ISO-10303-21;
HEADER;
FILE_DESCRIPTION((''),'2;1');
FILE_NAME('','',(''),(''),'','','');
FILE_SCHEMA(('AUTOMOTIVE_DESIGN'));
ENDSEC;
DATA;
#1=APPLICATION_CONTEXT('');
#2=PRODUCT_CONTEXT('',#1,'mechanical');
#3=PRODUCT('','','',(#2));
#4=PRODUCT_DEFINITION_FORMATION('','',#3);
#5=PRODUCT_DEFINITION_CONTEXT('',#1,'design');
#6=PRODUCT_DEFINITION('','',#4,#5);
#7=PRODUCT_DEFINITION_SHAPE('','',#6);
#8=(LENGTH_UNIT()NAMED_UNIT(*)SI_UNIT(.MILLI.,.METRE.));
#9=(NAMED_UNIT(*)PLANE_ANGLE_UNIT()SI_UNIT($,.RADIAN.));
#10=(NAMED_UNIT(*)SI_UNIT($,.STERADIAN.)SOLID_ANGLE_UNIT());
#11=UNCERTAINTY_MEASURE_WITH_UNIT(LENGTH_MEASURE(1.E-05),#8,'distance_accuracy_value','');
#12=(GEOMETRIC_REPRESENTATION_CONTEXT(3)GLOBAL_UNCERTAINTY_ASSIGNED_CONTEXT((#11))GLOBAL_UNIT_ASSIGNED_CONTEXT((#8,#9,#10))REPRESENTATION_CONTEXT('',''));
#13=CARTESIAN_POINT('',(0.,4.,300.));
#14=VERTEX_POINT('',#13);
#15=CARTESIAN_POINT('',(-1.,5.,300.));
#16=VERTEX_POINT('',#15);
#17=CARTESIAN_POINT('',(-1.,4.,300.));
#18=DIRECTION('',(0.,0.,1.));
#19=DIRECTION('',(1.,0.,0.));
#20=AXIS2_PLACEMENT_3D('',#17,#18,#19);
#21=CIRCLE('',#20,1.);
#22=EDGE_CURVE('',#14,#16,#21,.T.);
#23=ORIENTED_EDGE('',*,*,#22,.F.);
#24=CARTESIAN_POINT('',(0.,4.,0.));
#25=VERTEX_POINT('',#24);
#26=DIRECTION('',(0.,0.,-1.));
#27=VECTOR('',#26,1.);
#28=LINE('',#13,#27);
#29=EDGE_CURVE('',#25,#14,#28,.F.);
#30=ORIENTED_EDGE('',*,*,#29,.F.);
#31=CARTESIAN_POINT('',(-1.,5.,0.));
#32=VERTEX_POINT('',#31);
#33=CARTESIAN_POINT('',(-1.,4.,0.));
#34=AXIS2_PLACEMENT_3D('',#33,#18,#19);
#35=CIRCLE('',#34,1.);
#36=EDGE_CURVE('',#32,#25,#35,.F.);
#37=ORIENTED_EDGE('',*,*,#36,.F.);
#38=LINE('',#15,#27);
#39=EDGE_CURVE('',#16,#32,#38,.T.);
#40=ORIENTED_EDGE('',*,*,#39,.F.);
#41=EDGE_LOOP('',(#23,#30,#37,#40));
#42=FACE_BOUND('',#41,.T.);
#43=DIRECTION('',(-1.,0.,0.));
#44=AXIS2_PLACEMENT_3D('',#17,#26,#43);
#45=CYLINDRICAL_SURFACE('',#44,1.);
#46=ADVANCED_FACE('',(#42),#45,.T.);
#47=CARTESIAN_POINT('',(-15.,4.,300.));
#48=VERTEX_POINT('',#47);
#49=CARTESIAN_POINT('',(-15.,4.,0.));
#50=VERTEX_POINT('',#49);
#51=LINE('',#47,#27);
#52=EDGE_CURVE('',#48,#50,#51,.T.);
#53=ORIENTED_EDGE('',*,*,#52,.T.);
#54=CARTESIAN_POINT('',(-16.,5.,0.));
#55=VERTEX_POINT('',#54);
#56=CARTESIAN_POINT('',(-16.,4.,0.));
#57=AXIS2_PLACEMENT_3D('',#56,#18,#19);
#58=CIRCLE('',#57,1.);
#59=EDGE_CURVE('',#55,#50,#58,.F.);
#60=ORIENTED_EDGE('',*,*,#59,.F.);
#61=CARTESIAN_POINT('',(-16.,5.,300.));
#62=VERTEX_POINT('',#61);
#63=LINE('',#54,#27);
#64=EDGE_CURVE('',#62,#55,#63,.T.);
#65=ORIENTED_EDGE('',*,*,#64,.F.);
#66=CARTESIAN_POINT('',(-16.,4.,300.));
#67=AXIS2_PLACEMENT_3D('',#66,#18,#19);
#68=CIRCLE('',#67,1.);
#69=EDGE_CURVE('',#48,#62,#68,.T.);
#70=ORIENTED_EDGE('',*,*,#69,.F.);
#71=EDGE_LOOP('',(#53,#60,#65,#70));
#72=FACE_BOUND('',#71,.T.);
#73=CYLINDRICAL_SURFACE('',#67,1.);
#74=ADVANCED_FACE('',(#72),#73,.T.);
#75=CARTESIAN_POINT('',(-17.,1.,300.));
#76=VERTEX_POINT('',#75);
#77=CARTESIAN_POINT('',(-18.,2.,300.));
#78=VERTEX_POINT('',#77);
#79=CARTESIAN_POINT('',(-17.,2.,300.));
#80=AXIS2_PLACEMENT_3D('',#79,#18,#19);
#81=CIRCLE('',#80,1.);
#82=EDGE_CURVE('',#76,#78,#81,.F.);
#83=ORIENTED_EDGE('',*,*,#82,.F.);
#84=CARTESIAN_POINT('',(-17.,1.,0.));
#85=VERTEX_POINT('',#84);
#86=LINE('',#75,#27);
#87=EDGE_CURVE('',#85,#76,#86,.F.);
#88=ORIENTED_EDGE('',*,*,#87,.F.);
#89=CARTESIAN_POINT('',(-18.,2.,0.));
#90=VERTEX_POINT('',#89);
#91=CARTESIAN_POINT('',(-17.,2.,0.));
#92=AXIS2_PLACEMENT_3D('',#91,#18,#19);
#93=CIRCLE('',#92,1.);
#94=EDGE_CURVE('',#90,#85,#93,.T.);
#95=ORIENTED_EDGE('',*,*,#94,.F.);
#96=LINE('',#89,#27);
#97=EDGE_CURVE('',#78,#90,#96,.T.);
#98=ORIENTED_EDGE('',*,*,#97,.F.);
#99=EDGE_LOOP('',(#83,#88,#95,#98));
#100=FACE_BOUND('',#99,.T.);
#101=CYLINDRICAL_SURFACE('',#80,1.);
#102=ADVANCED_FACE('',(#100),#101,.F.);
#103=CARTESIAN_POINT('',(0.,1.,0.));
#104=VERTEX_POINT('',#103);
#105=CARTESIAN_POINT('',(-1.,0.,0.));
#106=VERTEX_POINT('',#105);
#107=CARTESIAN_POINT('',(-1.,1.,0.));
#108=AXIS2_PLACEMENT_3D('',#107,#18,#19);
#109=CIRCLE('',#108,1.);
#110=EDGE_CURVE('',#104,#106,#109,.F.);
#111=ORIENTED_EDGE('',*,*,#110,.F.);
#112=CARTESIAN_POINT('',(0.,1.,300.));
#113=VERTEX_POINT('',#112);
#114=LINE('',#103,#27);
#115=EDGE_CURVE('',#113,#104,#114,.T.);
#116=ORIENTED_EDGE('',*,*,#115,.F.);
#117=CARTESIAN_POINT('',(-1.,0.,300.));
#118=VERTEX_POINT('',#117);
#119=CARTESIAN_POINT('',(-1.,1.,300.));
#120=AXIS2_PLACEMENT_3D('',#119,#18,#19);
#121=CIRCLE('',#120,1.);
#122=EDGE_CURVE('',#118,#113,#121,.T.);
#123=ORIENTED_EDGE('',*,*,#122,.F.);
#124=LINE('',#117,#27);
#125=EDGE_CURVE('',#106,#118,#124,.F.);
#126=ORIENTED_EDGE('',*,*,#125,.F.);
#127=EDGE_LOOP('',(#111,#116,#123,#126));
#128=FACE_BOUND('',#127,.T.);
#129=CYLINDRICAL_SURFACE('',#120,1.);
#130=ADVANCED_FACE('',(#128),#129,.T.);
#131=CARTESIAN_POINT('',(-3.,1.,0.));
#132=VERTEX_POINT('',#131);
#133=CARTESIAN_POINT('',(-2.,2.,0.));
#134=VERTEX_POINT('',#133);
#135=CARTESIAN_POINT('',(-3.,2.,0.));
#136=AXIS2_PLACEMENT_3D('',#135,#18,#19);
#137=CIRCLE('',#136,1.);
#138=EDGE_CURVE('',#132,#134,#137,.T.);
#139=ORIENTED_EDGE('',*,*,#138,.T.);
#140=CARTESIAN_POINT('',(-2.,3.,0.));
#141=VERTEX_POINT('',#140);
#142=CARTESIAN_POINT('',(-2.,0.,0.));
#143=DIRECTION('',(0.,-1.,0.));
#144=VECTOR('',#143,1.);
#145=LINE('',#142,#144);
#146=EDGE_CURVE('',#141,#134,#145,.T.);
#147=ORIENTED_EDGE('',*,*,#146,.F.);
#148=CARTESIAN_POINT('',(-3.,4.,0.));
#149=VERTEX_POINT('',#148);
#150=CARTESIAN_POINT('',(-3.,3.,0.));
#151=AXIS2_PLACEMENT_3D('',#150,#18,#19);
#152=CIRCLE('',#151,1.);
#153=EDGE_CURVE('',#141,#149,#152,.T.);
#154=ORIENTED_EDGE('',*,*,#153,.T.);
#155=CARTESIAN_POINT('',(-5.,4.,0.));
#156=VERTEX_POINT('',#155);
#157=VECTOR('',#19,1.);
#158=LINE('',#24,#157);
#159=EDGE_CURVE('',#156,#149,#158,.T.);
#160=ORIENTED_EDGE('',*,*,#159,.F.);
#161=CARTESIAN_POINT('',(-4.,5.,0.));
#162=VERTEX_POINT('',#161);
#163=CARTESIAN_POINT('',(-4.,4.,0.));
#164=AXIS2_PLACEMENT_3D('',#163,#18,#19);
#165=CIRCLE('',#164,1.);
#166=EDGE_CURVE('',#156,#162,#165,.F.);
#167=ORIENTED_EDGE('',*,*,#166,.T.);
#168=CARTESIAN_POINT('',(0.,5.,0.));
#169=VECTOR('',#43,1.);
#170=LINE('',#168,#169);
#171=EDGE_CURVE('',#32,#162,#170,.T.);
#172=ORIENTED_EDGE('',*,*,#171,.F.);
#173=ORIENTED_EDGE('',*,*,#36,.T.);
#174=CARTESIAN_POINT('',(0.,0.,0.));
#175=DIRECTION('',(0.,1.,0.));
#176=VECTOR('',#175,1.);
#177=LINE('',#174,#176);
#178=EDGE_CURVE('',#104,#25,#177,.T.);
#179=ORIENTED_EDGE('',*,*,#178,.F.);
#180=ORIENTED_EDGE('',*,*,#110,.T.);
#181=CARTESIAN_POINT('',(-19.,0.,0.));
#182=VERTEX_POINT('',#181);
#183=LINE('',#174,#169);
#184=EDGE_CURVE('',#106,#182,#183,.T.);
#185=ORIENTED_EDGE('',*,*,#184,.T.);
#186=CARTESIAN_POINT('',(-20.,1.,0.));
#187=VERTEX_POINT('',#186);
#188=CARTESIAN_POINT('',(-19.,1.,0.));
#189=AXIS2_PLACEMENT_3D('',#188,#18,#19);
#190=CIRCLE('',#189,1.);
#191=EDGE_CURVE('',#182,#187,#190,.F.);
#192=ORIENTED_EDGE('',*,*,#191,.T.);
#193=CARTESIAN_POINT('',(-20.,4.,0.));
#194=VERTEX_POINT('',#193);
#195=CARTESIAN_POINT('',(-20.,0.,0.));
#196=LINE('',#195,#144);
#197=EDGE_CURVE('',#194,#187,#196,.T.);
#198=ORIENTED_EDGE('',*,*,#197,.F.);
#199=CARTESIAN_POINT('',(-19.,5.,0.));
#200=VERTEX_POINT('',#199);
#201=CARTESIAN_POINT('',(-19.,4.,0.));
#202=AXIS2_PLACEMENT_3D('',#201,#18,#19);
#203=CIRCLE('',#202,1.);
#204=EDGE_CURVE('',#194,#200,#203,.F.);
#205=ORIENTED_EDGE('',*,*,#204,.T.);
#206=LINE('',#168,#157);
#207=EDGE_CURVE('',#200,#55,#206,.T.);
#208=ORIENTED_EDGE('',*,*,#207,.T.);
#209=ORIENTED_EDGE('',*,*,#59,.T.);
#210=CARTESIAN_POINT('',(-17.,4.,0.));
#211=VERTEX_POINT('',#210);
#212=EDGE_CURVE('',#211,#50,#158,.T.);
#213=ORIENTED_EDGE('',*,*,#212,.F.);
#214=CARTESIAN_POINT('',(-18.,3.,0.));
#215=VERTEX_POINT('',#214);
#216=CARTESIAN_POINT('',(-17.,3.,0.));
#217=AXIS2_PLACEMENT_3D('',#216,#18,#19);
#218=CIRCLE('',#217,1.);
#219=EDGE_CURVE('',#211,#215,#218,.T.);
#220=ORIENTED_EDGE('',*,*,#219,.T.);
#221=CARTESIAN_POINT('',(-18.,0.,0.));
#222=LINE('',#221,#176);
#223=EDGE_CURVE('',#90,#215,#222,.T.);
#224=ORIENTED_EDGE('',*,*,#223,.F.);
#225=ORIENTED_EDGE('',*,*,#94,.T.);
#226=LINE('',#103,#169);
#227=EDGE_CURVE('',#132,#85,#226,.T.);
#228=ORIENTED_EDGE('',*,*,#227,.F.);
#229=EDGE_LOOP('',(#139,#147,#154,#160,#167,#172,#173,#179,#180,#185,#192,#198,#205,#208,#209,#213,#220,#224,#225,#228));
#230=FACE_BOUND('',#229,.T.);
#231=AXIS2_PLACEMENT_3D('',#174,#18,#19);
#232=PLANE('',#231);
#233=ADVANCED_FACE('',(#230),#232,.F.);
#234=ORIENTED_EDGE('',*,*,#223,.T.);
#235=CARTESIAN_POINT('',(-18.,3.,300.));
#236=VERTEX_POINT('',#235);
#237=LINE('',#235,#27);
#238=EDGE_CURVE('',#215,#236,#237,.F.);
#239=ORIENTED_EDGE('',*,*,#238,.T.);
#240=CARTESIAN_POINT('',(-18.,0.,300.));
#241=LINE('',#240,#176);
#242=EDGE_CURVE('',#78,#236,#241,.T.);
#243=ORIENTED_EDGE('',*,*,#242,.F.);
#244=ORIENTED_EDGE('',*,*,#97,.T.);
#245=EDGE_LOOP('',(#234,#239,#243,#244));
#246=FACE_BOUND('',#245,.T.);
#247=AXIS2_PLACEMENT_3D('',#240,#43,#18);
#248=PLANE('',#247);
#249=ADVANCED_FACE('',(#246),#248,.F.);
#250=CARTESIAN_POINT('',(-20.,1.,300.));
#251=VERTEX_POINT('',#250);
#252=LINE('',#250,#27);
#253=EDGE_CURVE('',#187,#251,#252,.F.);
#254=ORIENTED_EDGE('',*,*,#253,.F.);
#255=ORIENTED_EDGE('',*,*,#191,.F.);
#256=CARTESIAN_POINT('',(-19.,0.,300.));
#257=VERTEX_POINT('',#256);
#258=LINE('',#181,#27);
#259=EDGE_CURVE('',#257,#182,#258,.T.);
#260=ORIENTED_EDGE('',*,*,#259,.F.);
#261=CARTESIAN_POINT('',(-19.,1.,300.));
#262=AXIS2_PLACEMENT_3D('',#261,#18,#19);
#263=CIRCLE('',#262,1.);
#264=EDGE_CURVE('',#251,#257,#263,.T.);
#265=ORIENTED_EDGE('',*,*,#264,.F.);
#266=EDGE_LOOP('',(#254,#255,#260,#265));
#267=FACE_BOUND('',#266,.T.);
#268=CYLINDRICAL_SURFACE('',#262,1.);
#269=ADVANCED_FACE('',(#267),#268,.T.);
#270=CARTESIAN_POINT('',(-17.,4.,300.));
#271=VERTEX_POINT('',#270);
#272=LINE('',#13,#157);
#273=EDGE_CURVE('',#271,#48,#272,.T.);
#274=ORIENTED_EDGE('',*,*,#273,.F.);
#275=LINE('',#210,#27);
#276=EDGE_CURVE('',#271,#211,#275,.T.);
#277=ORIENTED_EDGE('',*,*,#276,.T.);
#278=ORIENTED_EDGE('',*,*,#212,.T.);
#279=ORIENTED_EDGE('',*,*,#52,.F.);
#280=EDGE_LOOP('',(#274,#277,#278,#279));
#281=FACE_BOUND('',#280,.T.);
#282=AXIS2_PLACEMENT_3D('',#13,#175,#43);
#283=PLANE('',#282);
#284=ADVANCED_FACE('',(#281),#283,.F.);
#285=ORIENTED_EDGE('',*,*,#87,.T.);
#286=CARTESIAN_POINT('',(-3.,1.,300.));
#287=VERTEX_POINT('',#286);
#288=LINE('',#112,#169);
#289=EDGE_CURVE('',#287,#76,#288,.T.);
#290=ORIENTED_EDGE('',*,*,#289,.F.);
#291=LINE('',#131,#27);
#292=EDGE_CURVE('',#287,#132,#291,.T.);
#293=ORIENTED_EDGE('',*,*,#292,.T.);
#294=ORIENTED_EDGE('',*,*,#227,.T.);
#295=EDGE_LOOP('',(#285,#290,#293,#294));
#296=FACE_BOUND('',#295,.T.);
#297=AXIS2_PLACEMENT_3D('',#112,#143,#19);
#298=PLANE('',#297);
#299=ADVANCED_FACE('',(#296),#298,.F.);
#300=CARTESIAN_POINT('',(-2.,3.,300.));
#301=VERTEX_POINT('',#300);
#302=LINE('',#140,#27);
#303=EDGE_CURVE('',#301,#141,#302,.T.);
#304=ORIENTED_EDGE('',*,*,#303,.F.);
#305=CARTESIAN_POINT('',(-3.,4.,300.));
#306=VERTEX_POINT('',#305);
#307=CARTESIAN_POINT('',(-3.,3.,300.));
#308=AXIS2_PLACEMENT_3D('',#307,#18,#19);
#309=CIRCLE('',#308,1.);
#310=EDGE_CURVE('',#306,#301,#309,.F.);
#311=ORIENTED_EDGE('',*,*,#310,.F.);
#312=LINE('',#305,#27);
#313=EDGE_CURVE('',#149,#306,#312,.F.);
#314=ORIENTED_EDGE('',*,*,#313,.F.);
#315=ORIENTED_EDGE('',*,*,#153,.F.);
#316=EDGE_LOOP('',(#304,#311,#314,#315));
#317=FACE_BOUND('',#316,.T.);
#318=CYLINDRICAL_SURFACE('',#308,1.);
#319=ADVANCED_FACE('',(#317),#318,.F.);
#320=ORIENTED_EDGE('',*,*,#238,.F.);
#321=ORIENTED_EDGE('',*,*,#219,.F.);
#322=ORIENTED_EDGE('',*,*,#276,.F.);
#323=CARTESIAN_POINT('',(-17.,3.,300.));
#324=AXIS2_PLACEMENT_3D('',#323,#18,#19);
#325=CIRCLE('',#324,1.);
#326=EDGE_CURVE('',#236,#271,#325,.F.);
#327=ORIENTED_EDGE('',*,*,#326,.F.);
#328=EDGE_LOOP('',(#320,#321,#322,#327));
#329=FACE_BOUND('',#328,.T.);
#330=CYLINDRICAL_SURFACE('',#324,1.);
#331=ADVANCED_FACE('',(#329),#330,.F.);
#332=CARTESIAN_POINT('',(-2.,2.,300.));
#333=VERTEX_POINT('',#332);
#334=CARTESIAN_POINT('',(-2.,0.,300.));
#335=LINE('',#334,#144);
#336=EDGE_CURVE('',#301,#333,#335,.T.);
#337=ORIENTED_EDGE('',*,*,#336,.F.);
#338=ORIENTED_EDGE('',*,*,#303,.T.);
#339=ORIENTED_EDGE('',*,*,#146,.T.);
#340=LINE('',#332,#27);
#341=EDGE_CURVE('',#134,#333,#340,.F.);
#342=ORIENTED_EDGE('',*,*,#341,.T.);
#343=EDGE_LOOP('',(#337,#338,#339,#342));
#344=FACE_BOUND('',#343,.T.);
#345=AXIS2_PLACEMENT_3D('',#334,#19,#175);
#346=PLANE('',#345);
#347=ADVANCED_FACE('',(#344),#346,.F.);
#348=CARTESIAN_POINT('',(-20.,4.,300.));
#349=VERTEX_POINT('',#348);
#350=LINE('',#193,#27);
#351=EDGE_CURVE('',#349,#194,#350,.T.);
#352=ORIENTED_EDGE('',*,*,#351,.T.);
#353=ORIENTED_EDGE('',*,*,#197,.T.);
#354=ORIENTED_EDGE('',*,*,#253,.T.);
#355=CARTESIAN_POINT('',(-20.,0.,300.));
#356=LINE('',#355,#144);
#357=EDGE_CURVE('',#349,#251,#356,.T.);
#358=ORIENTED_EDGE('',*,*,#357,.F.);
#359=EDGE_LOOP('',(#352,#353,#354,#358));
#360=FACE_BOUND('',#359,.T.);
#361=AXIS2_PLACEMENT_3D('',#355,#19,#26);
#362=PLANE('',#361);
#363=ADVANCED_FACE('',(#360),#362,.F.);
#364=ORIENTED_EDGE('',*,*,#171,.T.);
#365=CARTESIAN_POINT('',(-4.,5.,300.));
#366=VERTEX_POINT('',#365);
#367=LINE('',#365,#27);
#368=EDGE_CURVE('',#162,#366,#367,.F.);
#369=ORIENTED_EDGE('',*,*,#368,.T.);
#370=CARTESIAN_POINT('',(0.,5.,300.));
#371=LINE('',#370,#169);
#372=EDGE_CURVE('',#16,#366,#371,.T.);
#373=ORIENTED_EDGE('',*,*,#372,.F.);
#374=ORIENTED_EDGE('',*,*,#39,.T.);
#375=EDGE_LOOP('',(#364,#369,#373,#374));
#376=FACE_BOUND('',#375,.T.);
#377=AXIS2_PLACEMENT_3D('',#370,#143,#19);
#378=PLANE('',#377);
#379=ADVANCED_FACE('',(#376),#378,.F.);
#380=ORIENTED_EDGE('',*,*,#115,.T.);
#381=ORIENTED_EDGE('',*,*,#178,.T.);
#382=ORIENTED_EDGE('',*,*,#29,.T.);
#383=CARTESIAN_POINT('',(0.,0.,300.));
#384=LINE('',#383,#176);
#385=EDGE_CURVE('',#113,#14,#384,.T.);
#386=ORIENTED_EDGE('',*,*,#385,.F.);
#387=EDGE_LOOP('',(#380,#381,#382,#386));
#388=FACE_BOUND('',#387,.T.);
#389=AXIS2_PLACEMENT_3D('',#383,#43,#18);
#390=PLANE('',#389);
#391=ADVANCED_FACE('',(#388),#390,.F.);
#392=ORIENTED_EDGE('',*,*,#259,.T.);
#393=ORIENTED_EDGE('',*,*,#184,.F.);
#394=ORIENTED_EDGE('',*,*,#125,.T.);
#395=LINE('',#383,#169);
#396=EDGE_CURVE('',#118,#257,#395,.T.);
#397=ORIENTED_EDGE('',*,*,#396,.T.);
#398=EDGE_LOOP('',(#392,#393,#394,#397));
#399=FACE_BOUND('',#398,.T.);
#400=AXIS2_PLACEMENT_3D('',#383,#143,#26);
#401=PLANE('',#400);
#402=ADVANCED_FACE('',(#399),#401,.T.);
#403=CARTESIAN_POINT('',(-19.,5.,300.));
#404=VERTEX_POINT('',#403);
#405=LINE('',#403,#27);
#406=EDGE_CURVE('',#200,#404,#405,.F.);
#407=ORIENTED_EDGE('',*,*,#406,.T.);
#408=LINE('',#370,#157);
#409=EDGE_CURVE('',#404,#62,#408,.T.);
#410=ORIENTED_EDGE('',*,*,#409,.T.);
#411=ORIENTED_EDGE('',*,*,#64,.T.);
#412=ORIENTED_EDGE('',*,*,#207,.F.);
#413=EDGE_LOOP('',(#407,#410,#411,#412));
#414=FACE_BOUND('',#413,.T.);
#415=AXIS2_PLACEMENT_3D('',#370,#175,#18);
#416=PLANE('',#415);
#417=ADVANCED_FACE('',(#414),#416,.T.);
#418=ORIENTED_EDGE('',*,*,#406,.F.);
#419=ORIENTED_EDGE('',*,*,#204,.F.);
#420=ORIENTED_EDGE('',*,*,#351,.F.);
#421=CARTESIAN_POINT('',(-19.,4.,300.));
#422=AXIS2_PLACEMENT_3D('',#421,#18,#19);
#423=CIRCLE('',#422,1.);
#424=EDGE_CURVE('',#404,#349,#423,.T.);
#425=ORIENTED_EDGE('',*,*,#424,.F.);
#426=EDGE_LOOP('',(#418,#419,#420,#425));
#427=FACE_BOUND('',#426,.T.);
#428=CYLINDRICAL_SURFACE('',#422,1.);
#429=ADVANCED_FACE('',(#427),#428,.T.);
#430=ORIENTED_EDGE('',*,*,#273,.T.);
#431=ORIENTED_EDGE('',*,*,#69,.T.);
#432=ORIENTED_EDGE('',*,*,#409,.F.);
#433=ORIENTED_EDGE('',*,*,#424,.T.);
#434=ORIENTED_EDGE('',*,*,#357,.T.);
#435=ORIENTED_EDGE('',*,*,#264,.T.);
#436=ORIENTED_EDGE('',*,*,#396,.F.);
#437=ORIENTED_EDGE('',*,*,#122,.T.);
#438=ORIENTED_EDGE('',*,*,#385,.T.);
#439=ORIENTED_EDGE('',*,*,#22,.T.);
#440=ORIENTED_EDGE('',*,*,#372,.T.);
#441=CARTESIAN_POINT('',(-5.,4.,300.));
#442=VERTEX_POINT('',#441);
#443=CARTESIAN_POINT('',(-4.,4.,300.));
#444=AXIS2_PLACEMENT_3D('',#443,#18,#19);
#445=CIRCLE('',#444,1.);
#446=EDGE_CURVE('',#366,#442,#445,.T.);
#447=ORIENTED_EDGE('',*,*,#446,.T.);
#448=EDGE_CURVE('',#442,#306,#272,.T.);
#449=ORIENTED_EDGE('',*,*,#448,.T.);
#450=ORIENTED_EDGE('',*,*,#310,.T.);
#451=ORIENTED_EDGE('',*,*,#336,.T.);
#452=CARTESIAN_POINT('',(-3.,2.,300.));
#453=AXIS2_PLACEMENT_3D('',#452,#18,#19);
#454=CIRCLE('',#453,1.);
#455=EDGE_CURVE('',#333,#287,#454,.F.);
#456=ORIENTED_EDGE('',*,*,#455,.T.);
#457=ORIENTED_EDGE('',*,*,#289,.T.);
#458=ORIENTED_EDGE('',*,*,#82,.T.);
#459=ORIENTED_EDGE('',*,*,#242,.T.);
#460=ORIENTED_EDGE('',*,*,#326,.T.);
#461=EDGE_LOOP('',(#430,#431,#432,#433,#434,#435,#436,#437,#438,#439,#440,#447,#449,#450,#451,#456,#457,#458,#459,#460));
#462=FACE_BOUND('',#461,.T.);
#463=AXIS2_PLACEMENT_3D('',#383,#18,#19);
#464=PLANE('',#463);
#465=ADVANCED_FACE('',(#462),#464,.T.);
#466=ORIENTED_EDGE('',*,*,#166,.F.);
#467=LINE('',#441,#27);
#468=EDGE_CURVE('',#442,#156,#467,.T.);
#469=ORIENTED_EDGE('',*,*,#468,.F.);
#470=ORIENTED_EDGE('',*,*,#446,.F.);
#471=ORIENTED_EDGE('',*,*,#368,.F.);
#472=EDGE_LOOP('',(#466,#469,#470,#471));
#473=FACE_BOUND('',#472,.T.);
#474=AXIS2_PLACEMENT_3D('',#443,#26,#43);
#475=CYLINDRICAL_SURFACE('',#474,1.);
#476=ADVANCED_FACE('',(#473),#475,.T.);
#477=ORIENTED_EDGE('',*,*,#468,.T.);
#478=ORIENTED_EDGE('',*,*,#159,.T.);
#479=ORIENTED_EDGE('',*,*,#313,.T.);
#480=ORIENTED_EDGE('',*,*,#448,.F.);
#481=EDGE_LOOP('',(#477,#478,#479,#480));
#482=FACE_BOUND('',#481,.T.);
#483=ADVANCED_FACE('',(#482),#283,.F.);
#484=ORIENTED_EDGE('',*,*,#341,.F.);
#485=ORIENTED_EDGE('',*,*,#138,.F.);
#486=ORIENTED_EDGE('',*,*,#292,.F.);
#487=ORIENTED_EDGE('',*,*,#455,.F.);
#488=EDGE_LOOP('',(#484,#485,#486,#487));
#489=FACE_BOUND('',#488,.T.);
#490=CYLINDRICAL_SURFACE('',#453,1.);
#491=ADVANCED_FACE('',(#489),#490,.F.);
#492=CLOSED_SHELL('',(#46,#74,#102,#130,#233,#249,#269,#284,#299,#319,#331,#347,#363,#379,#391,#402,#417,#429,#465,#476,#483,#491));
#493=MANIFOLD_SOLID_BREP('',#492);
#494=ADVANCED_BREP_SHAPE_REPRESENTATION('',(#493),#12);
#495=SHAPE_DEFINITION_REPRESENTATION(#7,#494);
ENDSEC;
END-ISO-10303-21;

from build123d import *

# Parameters (mm, degrees)
BOSS_EXTRUDE1_DEPTH = 300
FILLET2_R           = 1


with BuildPart() as part:
    # Sketch1 → Boss-Extrude1 (new body)
    with BuildSketch(Plane.XY):
        Polygon((0, 0), (-20, 0), (-20, 5), (-15, 5), (-15, 4), (-18, 4), (-18, 1), (-2, 1), (-2, 4), (-5, 4), (-5, 5), (0, 5), align=None)
    extrude(amount=BOSS_EXTRUDE1_DEPTH)

    # Fillet2
    fillet2_edges = [part.edges().sort_by_distance(p)[0] for p in [
        (-18, 4, 150),
        (-2, 4, 150),
        (-2, 1, 150),
        (-18, 1, 150),
        (-20, 0, 150),
        (-20, 5, 150),
        (-15, 5, 150),
        (0, 0, 150),
        (0, 5, 150),
        (-5, 5, 150),
    ]]
    fillet(fillet2_edges, radius=FILLET2_R - 0.0001)  # a hair under: the kernel refuses the full size


solid = part.part
